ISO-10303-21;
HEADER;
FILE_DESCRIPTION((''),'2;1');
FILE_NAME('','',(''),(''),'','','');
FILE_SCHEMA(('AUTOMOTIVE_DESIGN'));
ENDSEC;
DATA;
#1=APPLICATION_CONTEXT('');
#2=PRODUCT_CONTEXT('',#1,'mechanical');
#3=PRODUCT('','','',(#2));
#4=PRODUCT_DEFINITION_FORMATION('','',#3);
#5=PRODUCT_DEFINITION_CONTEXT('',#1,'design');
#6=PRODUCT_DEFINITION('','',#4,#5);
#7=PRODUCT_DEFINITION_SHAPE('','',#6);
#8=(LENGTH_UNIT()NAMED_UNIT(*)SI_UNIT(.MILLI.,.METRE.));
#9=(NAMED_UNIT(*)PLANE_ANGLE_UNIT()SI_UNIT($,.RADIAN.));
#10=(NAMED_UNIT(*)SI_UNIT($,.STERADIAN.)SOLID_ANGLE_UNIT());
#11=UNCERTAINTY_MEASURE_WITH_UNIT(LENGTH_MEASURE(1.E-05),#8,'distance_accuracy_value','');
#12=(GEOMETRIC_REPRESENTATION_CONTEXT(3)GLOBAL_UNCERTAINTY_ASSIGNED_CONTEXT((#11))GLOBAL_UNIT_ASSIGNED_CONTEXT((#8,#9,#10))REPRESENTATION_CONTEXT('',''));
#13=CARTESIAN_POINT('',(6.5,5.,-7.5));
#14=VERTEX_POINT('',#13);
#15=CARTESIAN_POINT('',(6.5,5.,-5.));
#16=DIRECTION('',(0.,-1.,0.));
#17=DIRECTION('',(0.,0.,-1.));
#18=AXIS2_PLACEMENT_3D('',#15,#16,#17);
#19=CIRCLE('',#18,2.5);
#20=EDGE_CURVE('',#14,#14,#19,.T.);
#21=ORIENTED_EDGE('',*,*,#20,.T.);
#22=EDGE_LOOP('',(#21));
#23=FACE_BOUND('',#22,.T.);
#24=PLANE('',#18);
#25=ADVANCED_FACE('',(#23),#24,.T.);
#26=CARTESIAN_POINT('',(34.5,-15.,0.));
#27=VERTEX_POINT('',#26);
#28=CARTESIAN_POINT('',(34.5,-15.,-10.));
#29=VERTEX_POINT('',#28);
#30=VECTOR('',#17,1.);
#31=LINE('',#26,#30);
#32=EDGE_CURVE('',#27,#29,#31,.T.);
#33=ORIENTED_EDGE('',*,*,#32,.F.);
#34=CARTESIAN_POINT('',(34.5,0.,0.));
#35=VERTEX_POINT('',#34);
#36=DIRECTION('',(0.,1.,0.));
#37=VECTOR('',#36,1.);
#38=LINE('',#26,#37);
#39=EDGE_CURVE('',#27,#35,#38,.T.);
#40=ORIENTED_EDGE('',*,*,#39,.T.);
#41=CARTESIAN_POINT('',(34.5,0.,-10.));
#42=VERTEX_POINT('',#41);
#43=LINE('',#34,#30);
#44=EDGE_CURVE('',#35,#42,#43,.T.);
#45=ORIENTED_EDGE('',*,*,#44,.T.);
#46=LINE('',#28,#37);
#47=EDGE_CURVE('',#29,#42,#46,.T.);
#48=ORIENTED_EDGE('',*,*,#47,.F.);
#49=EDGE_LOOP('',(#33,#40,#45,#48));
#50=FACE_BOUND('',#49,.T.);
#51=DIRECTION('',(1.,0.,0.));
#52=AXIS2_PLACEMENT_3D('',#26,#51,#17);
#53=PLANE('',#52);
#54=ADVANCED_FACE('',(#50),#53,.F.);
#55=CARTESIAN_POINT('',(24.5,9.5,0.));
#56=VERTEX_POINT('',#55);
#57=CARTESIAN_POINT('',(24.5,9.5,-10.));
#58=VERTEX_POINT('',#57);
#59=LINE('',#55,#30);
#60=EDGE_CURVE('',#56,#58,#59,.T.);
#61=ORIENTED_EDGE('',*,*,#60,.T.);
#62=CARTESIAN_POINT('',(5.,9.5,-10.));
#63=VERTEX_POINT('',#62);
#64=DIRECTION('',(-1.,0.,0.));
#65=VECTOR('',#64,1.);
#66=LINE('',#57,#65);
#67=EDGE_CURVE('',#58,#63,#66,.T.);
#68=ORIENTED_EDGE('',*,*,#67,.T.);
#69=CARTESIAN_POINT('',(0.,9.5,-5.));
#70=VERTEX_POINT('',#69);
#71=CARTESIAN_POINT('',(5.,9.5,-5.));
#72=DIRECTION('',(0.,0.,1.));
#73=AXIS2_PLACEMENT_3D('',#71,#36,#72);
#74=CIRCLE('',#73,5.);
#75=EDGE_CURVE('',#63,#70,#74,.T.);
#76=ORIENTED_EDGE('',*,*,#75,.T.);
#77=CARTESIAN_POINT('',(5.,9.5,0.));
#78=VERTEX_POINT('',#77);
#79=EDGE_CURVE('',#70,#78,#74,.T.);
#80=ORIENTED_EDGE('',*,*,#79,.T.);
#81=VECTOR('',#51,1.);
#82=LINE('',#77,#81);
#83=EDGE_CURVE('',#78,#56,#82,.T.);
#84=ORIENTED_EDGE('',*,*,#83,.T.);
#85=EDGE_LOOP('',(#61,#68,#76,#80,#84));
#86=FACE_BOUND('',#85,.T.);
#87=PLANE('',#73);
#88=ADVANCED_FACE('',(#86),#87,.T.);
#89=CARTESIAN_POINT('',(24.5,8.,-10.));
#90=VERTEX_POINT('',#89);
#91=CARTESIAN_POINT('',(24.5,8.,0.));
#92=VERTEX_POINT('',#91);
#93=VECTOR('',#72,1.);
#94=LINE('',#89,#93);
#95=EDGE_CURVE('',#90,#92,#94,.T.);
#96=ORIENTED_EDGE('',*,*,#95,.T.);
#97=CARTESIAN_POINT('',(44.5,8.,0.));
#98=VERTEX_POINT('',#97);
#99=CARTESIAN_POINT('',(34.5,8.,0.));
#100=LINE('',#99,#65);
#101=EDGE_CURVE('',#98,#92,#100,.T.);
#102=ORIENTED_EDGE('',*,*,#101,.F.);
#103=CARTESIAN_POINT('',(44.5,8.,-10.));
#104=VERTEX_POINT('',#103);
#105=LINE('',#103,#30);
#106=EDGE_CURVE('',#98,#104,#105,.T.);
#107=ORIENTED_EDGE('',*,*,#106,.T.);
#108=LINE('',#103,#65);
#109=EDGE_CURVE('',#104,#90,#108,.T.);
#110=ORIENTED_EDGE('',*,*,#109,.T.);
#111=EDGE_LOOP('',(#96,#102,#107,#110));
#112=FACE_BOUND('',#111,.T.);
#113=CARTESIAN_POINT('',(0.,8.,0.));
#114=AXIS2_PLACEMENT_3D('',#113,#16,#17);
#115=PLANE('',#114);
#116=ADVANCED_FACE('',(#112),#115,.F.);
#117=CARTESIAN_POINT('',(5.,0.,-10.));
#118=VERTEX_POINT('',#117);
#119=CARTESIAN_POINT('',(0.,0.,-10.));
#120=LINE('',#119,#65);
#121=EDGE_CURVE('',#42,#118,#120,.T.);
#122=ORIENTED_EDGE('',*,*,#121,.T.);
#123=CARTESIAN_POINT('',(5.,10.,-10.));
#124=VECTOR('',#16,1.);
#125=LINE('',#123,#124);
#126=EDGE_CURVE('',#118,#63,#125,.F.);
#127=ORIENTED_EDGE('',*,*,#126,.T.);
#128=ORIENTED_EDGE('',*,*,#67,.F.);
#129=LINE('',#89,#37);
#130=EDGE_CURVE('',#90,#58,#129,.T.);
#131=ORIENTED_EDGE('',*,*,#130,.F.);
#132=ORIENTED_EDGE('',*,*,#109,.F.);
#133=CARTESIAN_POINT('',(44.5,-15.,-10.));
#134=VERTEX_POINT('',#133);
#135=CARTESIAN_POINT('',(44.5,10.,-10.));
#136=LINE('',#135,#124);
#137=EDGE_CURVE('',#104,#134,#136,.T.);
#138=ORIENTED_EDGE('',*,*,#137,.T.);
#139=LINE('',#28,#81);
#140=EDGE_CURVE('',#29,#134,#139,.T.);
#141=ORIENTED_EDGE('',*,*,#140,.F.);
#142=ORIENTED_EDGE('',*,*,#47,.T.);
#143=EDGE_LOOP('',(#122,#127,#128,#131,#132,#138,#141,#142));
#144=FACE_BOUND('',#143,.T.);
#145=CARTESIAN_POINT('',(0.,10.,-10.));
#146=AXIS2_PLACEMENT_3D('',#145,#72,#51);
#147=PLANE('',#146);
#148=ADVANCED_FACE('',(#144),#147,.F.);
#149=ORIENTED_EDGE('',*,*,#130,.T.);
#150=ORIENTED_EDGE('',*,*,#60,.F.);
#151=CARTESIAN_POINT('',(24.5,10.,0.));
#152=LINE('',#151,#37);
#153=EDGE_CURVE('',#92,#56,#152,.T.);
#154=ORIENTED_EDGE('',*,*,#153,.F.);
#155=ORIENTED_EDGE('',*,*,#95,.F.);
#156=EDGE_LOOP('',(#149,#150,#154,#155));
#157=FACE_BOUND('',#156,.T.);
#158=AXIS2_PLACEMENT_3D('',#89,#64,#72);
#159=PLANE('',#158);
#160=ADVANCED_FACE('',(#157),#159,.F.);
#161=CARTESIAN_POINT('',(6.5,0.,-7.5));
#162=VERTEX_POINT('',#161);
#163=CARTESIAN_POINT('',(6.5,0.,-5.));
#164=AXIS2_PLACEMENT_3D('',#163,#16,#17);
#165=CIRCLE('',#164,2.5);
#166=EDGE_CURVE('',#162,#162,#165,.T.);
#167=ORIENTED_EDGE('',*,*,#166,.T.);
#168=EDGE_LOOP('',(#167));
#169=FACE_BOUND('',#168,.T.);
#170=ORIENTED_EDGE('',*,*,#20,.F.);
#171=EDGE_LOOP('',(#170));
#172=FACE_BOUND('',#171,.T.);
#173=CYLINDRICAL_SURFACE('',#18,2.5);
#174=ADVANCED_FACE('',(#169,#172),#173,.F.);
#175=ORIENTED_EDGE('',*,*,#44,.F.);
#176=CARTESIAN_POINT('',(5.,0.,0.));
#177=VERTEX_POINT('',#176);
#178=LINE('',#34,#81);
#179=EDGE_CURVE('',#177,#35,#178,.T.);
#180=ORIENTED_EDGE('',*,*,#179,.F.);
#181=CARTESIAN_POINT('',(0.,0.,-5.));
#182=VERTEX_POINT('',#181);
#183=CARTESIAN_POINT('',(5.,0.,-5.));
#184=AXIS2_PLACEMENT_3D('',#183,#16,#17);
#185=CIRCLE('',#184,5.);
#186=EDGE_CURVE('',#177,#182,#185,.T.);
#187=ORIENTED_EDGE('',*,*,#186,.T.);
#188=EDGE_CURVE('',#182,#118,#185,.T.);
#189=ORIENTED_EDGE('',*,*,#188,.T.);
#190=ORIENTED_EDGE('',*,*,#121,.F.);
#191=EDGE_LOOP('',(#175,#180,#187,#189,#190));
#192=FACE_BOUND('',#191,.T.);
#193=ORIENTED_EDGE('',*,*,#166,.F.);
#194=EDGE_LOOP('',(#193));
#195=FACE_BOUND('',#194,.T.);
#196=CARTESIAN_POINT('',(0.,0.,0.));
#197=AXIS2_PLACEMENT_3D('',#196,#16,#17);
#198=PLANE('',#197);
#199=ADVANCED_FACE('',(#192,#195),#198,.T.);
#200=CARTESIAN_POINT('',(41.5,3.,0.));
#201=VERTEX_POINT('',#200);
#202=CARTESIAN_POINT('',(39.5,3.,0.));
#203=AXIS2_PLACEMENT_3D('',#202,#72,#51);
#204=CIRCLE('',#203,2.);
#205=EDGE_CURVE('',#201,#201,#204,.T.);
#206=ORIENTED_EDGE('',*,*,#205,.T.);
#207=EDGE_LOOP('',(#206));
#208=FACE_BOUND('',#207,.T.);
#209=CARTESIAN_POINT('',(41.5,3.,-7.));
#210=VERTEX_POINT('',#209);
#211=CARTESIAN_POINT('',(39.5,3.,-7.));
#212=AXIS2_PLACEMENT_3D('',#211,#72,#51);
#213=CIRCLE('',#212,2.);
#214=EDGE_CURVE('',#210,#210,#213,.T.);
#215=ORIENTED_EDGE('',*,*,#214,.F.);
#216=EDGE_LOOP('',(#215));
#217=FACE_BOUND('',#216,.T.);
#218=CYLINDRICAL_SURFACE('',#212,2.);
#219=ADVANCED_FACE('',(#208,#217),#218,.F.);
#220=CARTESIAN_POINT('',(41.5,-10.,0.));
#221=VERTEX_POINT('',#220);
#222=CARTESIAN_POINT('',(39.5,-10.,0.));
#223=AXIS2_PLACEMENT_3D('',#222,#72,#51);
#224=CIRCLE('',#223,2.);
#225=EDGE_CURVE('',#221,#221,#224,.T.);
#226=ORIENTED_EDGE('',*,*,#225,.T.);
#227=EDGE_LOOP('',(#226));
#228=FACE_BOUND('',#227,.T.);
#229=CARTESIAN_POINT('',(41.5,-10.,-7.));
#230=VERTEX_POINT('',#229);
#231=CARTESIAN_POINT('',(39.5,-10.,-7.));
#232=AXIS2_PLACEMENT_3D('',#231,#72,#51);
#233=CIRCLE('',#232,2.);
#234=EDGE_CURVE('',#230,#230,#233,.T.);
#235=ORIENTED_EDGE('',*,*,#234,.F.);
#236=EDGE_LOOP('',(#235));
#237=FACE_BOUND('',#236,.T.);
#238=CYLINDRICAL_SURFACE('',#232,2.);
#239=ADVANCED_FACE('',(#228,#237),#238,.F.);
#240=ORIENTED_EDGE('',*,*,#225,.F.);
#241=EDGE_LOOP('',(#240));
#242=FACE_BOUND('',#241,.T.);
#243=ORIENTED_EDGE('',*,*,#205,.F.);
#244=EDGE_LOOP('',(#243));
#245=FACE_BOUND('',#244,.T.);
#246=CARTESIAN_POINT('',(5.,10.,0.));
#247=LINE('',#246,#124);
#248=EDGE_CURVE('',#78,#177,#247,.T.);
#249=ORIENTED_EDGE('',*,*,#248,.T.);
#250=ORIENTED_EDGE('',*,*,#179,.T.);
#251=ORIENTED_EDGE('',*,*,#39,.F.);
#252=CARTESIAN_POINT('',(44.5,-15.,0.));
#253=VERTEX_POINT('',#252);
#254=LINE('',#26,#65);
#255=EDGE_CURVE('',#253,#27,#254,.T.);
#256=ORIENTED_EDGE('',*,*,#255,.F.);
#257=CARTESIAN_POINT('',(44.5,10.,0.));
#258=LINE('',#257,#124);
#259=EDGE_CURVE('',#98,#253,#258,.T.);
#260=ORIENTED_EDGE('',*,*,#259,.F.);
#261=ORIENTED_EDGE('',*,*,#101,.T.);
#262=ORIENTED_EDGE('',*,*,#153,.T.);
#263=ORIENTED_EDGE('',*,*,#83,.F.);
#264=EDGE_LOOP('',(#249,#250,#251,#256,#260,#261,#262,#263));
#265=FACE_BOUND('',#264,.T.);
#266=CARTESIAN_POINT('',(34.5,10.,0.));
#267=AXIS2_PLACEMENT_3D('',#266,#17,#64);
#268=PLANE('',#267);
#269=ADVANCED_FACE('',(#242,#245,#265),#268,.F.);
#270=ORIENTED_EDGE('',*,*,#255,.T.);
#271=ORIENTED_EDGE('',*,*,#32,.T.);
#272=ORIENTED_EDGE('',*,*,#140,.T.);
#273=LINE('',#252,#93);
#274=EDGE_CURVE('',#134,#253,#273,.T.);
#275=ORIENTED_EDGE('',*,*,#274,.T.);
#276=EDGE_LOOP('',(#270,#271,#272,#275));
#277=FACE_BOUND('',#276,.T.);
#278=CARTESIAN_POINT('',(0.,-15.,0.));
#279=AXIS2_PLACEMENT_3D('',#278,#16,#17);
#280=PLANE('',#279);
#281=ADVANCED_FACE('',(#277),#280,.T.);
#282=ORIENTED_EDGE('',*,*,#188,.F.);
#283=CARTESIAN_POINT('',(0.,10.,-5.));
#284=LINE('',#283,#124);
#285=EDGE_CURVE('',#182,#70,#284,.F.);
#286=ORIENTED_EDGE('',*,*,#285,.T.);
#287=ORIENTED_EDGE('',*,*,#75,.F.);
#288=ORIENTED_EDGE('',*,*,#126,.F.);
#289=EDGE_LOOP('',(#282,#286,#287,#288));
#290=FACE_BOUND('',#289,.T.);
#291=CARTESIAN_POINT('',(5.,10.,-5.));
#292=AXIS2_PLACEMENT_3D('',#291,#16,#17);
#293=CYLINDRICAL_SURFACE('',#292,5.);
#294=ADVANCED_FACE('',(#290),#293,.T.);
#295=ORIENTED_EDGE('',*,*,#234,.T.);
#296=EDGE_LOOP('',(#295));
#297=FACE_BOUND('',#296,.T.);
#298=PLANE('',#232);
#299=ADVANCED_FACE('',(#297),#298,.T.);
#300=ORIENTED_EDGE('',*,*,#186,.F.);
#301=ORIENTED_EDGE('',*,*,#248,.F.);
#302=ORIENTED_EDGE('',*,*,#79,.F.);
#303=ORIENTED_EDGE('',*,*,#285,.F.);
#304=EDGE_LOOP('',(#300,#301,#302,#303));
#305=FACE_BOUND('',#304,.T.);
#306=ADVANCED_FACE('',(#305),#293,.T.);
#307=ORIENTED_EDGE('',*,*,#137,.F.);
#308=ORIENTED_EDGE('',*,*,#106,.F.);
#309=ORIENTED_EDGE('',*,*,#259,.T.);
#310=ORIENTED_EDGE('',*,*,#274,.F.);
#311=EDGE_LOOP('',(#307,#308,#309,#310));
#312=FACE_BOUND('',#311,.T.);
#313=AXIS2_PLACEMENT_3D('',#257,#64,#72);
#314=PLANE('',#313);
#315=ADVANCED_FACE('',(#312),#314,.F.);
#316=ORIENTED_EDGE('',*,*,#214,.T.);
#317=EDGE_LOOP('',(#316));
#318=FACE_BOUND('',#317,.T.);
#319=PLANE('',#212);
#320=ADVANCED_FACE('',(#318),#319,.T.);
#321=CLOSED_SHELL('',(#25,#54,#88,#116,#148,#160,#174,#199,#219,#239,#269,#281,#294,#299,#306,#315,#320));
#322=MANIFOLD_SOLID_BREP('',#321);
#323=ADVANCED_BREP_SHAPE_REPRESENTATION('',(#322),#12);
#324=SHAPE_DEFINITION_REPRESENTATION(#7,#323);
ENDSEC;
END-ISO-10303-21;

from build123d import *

# Parameters (mm, degrees)
BOSS_EXTRUDE1_DEPTH    = 10
SKETCH2_W              = 20
SKETCH2_H              = 17.246462599
CUT_EXTRUDE1_DEPTH     = 2
FILLET1_R              = 5
SKETCH4_R              = 2.5
CUT_EXTRUDE4_DEPTH     = 5
SKETCH6_W              = 10
SKETCH6_H              = 10
BOSS_EXTRUDE2_DEPTH    = 15
SKETCH5_R              = 2
CUT_EXTRUDE5_DEPTH     = 7
CUT_EXTRUDE6_START     = -0.5
CUT_EXTRUDE6_OUTLINE_W = 25.5
CUT_EXTRUDE6_OUTLINE_H = 12
CUT_EXTRUDE6_DEPTH     = 0.5


# Read off the part's stored shape, not the designer's step: Cut-Extrude6
with BuildPart() as part:
    # Sketch1 → Boss-Extrude1 (new body)
    with BuildSketch(Plane(origin=(0, 0, 0), x_dir=(1, 0, 0), z_dir=(0, 1, 0))):
        Polygon((0, 0), (34.5, 0), (44.5, 0), (44.5, 10), (0, 10), align=None)
    extrude(amount=BOSS_EXTRUDE1_DEPTH)

    # Sketch2 → Cut-Extrude1 (cut)
    with BuildSketch(Plane(origin=(0, 10, 0), x_dir=(1, 0, 0), z_dir=(0, 1, 0))):
        with Locations((34.5, 1.3767687)):
            Rectangle(SKETCH2_W, SKETCH2_H)
    extrude(amount=-CUT_EXTRUDE1_DEPTH, mode=Mode.SUBTRACT)

    # Fillet1
    fillet1_edges = [part.edges().sort_by_distance(p)[0] for p in [
        (0, 5, -10),
        (0, 5, 0),
    ]]
    fillet(fillet1_edges, radius=FILLET1_R - 0.0001)  # a hair under: the kernel refuses the full size

    # Sketch4 → Cut-Extrude4 (cut)
    with BuildSketch(Plane.XZ):
        with Locations(Location((6.5, -5, 0), (0, 0, 270))):
            Circle(SKETCH4_R)
    extrude(amount=-CUT_EXTRUDE4_DEPTH, mode=Mode.SUBTRACT)

    # Sketch6 → Boss-Extrude2 (add)
    with BuildSketch(Plane.XZ):
        with Locations((39.5, -5)):
            Rectangle(SKETCH6_W, SKETCH6_H)
    extrude(amount=BOSS_EXTRUDE2_DEPTH)

    # Sketch5 → Cut-Extrude5 (cut)
    with BuildSketch(Plane.XY):
        with Locations((39.5, 3)):
            Circle(SKETCH5_R)
        with Locations((39.5, -10)):
            Circle(SKETCH5_R)
    extrude(amount=-CUT_EXTRUDE5_DEPTH, mode=Mode.SUBTRACT)

    # Cut-Extrude6 outline → Cut-Extrude6 (cut)
    with BuildSketch(Plane(origin=(0, 10, 0), x_dir=(1, 0, 0), z_dir=(0, 1, 0)).offset(CUT_EXTRUDE6_START)):
        with Locations((11.75, 5)):
            Rectangle(CUT_EXTRUDE6_OUTLINE_W, CUT_EXTRUDE6_OUTLINE_H)
    extrude(amount=CUT_EXTRUDE6_DEPTH, mode=Mode.SUBTRACT)


solid = part.part
